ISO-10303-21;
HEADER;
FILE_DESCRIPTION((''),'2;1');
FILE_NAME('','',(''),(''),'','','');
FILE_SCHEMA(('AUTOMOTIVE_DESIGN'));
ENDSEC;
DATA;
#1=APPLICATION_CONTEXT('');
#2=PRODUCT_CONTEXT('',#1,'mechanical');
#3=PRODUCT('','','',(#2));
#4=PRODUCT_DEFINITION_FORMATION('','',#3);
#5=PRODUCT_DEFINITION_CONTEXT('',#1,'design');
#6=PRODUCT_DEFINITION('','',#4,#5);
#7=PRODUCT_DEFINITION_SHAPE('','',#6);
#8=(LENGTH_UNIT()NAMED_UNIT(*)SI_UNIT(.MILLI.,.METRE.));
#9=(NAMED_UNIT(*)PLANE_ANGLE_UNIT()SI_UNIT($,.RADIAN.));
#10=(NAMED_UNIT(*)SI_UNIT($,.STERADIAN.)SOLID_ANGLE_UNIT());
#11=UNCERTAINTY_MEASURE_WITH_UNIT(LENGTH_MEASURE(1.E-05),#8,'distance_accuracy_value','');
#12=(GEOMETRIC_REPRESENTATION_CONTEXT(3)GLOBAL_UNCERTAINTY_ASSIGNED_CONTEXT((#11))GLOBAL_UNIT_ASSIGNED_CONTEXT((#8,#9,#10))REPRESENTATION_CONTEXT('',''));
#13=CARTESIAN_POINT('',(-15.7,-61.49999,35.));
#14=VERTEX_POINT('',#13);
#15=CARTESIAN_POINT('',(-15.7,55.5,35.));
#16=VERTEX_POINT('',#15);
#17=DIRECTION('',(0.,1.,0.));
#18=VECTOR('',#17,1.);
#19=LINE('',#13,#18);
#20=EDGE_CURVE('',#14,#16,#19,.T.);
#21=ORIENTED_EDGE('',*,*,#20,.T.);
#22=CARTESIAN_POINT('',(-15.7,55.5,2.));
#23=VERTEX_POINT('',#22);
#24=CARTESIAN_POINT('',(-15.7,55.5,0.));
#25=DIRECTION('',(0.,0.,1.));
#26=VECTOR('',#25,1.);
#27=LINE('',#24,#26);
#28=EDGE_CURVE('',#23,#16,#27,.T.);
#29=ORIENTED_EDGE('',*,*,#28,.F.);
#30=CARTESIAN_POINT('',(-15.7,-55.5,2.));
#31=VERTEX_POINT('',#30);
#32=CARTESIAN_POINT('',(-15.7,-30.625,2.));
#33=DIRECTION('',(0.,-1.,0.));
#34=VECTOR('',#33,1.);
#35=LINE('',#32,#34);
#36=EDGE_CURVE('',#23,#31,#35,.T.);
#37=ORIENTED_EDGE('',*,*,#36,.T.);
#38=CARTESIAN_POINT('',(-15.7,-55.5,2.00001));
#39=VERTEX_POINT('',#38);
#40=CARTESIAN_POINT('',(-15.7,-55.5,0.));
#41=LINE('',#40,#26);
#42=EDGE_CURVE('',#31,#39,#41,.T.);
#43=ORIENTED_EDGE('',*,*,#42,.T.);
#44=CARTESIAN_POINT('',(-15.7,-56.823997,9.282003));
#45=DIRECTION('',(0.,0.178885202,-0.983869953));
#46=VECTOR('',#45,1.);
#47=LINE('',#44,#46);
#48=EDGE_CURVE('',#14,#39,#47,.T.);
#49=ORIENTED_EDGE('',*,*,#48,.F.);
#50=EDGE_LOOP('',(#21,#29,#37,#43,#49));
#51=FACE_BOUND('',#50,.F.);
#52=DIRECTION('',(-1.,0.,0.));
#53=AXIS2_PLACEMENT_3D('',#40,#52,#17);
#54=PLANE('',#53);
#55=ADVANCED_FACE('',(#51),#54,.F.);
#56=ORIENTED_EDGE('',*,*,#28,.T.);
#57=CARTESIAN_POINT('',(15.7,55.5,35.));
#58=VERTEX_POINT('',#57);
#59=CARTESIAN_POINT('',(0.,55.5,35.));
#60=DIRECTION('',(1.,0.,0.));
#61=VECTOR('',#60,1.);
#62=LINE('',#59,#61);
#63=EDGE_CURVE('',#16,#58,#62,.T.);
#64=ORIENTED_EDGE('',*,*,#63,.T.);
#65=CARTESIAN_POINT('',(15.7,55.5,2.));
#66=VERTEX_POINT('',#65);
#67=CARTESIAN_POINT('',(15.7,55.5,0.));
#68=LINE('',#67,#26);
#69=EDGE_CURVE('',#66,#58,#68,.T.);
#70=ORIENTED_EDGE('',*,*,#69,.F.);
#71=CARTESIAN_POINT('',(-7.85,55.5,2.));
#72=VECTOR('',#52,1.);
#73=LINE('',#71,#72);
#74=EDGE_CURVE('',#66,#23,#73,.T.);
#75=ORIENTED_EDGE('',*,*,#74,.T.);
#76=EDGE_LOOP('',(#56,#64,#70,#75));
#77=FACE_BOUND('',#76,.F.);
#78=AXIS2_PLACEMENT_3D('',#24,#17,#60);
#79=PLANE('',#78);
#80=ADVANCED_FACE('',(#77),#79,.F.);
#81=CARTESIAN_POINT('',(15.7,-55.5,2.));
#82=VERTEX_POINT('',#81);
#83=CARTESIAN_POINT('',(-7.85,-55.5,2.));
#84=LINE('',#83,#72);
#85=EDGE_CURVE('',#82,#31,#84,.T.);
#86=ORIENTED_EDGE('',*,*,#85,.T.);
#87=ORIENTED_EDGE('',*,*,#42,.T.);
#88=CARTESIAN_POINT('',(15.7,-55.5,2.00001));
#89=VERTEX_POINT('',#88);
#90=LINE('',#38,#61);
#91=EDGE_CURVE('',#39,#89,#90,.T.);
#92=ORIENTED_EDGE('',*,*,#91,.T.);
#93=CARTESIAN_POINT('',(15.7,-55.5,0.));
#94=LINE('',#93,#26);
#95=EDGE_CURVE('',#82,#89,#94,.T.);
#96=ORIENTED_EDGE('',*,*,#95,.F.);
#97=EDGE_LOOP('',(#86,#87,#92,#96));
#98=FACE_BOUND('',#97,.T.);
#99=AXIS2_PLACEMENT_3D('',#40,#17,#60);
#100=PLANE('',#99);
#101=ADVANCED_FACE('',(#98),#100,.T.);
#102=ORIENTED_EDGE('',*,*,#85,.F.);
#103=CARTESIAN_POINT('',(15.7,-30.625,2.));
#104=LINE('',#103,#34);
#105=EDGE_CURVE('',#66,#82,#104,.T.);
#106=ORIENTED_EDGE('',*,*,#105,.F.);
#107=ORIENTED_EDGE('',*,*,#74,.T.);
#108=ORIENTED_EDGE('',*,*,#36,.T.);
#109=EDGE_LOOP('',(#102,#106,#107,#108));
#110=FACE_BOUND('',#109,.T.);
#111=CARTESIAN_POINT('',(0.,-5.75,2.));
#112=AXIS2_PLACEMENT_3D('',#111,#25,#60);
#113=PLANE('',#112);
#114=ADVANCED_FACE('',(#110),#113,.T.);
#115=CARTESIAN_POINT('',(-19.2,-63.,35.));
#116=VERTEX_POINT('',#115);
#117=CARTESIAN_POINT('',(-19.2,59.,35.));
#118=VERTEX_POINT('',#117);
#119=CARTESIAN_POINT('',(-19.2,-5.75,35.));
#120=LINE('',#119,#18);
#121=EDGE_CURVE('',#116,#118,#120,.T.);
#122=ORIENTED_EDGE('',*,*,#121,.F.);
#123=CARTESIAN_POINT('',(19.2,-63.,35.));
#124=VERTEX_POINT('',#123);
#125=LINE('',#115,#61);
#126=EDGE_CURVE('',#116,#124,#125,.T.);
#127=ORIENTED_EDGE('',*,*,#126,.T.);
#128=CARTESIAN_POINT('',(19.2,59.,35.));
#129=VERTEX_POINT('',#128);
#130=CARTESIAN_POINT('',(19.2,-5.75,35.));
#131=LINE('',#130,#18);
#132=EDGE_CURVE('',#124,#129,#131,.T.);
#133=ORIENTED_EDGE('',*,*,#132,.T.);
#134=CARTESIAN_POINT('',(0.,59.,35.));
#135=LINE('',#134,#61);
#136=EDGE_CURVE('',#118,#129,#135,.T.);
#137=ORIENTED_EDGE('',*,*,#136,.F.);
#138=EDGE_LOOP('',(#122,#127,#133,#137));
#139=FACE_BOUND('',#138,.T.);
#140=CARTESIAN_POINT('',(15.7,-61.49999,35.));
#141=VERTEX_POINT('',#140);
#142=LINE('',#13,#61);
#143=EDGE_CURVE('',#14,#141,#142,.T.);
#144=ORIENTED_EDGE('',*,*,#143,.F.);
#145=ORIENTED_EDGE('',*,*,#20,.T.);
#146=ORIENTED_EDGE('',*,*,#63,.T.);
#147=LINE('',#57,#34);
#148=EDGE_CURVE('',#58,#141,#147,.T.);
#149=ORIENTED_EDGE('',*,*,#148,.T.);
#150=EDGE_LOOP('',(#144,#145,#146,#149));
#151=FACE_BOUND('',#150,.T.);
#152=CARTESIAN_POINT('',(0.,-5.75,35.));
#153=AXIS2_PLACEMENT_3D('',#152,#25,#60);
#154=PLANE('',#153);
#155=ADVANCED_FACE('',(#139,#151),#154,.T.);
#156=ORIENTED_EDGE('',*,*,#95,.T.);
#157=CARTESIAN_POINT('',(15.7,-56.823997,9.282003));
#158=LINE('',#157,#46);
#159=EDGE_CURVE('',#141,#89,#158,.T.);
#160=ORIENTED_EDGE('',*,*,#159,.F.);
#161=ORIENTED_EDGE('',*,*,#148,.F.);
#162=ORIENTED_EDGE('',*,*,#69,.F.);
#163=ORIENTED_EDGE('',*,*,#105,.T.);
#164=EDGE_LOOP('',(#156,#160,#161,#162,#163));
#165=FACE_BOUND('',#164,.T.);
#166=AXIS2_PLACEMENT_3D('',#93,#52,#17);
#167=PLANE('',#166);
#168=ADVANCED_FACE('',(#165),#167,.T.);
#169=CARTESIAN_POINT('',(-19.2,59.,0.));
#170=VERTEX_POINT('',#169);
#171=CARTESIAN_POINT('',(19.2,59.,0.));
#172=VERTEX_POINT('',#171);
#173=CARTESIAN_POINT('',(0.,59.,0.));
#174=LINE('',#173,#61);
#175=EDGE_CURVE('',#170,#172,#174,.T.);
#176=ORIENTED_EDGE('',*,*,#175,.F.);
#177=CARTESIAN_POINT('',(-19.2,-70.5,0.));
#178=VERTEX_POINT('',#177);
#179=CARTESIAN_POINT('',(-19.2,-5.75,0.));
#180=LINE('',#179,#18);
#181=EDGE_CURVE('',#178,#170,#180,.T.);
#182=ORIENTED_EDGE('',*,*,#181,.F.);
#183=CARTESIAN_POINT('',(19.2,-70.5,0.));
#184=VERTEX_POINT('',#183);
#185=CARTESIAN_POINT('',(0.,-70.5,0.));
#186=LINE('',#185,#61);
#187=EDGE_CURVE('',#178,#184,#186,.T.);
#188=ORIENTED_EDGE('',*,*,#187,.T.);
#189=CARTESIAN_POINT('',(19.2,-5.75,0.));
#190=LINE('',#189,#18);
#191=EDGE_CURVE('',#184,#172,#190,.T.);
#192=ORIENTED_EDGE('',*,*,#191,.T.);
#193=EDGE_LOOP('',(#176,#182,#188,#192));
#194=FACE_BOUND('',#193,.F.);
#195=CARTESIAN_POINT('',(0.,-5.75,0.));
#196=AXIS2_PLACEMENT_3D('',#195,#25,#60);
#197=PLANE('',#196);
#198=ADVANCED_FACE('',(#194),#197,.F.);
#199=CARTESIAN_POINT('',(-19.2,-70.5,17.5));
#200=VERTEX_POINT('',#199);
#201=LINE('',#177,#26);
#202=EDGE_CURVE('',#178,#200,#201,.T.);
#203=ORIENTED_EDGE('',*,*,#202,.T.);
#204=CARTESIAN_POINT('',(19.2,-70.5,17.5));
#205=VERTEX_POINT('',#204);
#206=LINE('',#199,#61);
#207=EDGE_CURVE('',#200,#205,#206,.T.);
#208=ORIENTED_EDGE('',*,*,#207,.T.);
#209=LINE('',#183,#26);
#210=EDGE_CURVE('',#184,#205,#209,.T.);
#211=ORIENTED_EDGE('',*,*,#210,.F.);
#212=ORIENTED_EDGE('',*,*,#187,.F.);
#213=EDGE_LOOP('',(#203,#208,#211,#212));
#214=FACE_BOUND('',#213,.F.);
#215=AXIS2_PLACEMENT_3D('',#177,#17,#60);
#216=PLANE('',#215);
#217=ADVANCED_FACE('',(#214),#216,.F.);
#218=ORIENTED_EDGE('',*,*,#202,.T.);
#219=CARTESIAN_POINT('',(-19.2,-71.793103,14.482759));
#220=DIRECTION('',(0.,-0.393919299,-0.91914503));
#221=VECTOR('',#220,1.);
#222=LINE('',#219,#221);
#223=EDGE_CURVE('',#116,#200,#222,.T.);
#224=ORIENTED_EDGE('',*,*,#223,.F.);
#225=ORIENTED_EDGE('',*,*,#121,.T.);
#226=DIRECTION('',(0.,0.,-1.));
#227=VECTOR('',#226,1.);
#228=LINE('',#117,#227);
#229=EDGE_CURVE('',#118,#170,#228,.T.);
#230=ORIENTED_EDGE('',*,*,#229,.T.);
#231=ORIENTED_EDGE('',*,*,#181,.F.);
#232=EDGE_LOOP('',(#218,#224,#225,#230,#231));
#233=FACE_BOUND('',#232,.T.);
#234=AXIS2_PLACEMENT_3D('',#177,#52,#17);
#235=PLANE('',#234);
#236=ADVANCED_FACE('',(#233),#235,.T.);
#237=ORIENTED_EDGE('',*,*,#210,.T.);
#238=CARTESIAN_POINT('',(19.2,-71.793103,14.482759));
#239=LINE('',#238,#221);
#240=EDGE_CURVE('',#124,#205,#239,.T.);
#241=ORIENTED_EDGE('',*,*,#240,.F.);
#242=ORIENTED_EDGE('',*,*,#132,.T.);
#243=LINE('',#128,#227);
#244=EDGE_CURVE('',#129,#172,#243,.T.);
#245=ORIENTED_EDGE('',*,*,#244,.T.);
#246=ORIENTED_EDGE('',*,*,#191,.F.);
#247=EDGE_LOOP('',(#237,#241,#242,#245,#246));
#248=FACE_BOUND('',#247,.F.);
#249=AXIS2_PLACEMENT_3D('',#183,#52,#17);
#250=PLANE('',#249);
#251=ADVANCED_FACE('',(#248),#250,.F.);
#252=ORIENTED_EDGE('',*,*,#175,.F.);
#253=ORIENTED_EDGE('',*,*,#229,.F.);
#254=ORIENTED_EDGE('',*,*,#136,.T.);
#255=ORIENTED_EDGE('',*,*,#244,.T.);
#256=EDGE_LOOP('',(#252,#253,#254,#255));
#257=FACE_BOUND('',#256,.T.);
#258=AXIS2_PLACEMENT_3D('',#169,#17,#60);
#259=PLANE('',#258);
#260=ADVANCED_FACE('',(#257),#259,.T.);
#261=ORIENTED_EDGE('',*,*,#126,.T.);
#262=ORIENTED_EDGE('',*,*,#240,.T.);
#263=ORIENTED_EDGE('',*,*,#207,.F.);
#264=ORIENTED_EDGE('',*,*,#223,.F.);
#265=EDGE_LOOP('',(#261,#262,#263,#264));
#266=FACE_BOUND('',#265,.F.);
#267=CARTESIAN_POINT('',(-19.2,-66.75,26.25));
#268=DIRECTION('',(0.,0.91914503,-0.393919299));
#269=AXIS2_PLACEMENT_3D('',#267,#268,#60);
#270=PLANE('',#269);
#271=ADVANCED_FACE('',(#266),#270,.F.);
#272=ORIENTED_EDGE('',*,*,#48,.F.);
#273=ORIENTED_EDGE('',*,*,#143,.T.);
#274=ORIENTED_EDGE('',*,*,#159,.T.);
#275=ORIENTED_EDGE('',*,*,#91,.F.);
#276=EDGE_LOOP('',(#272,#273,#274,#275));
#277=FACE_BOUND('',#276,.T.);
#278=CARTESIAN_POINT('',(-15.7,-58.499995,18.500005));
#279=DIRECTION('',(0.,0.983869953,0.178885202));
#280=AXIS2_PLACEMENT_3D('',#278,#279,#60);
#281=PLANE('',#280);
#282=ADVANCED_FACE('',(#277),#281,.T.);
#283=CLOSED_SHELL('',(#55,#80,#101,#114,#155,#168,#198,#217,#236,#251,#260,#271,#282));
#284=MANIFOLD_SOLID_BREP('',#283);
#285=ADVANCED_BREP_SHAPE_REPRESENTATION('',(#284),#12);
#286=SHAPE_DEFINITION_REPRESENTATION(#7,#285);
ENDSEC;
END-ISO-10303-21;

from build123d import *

# Parameters (mm, degrees)
F0_W     = 38.4
F0_H     = 129.5
F0_W_2   = 31.4
F0_H_2   = 111
F1_DEPTH = 2
F2_DEPTH = 35
F3_SIZE2 = 17.5
F3_SIZE  = 7.5
F4_SIZE2 = 32.99999
F4_SIZE  = 5.99999


# Not quite as in the source:
# - a fillet or chamfer is up to 0.001 mm smaller than in the source, because OpenCascade refuses the exact size


with BuildPart() as f1:
    # F0 (on Top) → F1 (new body)
    with BuildSketch(Plane.XY):
        with Locations((0, -5.75)):
            Rectangle(F0_W, F0_H)
        Rectangle(F0_W_2, F0_H_2, mode=Mode.SUBTRACT)
        Rectangle(F0_W_2, F0_H_2)
    extrude(amount=F1_DEPTH)

    # F0 (on Top) → F2 (join)
    with BuildSketch(Plane.XY):
        with Locations((0, -5.75)):
            Rectangle(F0_W, F0_H)
        Rectangle(F0_W_2, F0_H_2, mode=Mode.SUBTRACT)
    extrude(amount=F2_DEPTH)

    # F3
    f3_edges = [f1.edges().sort_by_distance(p)[0] for p in [
        (0, -70.5, 35),
    ]]
    f3_side = f1.faces().sort_by_distance((0, -69.149266, 35))[0]
    chamfer(f3_edges, length=F3_SIZE, length2=F3_SIZE2, reference=f3_side)

    # F4 (size 6 and 33 in the source; OpenCascade refuses exactly that, so slightly less here)
    f4_edges = [f1.edges().sort_by_distance(p)[0] for p in [
        (0, -55.5, 35),
    ]]
    f4_side = f1.faces().sort_by_distance((17.920994, -2, 35))[0]
    chamfer(f4_edges, length=F4_SIZE, length2=F4_SIZE2, reference=f4_side)


solid = f1.part
